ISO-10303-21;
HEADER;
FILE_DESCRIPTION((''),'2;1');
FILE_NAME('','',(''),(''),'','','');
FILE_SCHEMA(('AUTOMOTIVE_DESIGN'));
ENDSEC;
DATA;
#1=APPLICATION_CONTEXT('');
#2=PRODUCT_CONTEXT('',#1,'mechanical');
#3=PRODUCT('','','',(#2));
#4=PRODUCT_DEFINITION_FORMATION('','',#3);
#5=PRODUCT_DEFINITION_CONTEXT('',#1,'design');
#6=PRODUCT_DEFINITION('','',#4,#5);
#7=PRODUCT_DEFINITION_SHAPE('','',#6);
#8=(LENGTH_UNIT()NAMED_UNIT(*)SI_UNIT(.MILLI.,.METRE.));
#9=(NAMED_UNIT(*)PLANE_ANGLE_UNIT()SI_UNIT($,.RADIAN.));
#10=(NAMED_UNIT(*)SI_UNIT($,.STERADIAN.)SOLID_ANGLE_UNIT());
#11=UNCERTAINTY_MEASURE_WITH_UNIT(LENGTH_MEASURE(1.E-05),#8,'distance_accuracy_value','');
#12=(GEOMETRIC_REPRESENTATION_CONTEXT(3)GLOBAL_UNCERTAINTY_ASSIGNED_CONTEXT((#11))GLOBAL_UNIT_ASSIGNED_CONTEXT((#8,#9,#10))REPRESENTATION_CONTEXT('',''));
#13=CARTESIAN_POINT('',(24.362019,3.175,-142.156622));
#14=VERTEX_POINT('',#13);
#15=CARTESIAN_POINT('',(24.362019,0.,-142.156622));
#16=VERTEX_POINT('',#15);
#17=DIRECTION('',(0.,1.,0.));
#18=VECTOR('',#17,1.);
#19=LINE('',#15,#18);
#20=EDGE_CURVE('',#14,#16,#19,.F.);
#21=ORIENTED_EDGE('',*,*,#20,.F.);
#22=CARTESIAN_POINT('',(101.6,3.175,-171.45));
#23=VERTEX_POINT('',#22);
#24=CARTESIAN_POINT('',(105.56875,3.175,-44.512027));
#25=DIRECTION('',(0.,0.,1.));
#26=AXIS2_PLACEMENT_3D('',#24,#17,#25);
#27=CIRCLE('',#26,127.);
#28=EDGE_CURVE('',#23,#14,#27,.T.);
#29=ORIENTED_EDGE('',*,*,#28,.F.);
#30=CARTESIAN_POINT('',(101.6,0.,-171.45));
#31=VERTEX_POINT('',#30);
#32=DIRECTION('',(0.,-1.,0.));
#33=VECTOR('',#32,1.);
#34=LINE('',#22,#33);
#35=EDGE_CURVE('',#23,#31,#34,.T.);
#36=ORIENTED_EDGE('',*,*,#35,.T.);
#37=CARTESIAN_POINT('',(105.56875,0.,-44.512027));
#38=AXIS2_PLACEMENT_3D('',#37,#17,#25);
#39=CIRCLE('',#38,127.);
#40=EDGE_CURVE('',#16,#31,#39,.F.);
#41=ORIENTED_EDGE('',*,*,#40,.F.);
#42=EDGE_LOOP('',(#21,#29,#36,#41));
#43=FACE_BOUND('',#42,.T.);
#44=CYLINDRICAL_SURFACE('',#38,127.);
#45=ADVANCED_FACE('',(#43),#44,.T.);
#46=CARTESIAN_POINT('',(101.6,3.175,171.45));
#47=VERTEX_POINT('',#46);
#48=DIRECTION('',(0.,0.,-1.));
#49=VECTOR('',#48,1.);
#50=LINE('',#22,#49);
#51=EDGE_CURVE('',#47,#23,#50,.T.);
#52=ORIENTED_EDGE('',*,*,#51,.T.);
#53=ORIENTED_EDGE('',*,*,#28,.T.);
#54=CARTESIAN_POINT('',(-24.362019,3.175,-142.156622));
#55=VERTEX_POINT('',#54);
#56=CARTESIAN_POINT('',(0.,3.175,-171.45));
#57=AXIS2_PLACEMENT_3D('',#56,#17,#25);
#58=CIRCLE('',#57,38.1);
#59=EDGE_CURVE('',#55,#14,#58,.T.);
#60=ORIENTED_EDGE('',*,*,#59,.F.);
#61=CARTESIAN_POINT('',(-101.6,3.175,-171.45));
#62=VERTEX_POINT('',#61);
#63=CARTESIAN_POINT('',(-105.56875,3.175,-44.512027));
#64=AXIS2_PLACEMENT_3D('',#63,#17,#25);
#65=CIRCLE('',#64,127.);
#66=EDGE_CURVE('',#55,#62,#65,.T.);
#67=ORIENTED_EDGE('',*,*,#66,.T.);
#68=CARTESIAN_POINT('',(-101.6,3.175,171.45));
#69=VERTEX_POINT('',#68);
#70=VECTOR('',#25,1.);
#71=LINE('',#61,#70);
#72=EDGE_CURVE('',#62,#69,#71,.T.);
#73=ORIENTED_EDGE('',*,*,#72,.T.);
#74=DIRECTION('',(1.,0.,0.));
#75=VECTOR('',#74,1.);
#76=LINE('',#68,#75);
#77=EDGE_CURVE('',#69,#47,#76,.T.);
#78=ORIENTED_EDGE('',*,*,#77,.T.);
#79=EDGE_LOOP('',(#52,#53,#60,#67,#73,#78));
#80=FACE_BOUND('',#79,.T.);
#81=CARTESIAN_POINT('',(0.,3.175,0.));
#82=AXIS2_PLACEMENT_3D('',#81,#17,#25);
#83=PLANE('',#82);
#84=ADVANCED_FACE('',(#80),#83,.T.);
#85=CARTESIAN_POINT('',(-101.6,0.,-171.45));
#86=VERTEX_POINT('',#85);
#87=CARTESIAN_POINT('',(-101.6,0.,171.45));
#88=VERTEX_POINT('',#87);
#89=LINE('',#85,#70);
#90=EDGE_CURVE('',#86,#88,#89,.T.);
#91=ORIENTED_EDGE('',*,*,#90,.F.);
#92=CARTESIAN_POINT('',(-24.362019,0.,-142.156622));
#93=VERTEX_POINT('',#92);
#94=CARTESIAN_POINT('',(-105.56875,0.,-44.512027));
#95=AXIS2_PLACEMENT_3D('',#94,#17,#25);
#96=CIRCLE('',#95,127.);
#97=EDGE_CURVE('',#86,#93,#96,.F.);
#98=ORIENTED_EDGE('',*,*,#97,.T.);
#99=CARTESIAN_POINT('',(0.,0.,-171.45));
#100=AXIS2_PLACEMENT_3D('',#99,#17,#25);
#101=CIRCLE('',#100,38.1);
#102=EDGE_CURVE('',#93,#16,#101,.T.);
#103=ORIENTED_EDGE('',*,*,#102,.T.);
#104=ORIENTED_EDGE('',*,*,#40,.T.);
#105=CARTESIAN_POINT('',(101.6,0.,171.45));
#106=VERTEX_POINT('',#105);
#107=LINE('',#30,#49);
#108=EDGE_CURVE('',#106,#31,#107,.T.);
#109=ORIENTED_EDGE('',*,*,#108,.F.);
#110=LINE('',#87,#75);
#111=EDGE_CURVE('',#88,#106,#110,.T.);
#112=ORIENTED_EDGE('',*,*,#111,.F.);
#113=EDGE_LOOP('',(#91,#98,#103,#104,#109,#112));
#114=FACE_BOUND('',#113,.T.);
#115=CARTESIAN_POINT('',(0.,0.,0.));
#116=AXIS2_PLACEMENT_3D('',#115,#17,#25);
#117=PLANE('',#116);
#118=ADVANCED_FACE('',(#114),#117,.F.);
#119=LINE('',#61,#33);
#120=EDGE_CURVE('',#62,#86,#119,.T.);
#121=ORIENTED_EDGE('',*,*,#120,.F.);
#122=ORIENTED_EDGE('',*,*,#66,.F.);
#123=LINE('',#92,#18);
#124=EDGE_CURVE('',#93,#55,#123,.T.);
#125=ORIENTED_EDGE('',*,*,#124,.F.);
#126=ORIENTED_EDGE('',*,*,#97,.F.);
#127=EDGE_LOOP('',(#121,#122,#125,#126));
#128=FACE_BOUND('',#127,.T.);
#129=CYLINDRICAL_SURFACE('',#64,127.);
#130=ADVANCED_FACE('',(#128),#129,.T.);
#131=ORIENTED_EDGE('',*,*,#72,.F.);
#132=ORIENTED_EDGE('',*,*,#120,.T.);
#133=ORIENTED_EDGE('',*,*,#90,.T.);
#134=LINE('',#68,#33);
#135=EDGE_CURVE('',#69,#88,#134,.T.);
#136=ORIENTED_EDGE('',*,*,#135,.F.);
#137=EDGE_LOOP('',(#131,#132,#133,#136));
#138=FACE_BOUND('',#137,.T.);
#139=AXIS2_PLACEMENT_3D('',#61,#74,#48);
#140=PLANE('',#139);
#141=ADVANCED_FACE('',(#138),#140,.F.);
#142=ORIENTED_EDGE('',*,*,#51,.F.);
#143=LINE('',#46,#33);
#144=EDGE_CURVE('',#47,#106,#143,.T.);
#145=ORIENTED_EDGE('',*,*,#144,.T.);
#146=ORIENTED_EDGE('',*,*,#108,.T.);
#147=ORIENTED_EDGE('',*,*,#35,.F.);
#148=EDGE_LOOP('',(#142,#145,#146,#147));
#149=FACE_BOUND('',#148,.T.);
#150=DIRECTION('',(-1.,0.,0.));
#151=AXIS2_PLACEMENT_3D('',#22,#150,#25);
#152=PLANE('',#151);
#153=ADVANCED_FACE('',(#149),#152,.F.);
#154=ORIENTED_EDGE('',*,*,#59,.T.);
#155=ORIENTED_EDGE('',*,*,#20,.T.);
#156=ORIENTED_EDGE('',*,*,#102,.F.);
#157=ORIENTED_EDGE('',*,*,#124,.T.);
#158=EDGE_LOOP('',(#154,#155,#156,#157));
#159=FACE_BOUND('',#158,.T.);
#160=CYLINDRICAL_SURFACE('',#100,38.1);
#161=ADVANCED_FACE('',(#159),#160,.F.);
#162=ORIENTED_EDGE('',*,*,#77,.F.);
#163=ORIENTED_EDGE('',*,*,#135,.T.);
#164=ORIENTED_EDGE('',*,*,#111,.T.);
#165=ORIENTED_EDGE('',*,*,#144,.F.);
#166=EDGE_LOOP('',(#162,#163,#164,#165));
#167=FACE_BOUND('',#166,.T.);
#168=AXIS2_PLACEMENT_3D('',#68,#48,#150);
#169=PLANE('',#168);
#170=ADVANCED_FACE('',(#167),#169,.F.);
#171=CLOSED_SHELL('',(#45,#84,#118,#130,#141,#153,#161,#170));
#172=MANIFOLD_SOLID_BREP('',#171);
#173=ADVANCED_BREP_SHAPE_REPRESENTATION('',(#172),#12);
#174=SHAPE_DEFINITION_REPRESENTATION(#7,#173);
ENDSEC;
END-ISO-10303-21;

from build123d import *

# Parameters (mm, degrees)
SKETCH1_W           = 203.2
SKETCH1_H           = 342.9
BOSS_EXTRUDE1_DEPTH = 3.175
CUT_EXTRUDE1_DEPTH  = 200.31819567
FILLET1_R           = 127


with BuildPart() as part:
    # Sketch1 → Boss-Extrude1 (new body)
    with BuildSketch(Plane(origin=(0, 0, 0), x_dir=(1, 0, 0), z_dir=(0, 1, 0))):
        Rectangle(SKETCH1_W, SKETCH1_H)
    extrude(amount=BOSS_EXTRUDE1_DEPTH)

    # Sketch2 → Cut-Extrude1 (cut, through all)
    with BuildSketch(Plane(origin=(0, 3.175, 0), x_dir=(1, 0, 0), z_dir=(0, 1, 0))):
        with BuildLine():
            ThreePointArc((-38.1, 171.45), (0, 133.35), (38.1, 171.45))
            Line((38.1, 171.45), (-38.1, 171.45))
        make_face()
    extrude(amount=-CUT_EXTRUDE1_DEPTH, mode=Mode.SUBTRACT)

    # Fillet1
    # the kernel refuses this fillet: 127 mm, written as the material it takes off along each edge
    with BuildSketch(Plane(origin=(38.1, 161.925, -171.45), x_dir=(-0.42460388780422365, 0, 0.905379223564103), z_dir=(0, -1, 0))) as fillet1_piece_1:
        with BuildLine():
            CenterArc((86.279510002, -114.983161393), FILLET1_R, 115.12559338, 37.958028581)
            Line((-26.962346876, -57.491580696), (-29.227184013, -56.341749082))
            ThreePointArc((-29.227184013, -56.341749082), (-15.780836666, -27.667296473), (-2.299663228, 1.078493875))
            Line((-2.299663228, 1.078493875), (1.078493875, 2.299663228))
            ThreePointArc((1.078493875, 2.299663228), (16.177408125, -1.065051582), (31.276322376, 2.299663228))
            Line((31.276322376, 2.299663228), (32.354816251, 0))
        make_face()
    extrude(amount=320.675, mode=Mode.SUBTRACT)
    with BuildSketch(Plane(origin=(-38.1, 161.925, -171.45), x_dir=(-1, 0, 0), z_dir=(0, -1, 0))) as fillet1_piece_2:
        with BuildLine():
            CenterArc((67.46875, -126.937973134), FILLET1_R, 91.790784659, 37.958028581)
            Line((-13.737980769, -29.293378416), (-15.362115385, -27.340486521))
            ThreePointArc((-15.362115385, -27.340486521), (-5.90471481, -15.09891425), (-2.54, 0))
            Line((-2.54, 0), (0, 2.54))
            ThreePointArc((0, 2.54), (31.75, 2.54), (63.420625, 2.538759463))
            Line((63.420625, 2.538759463), (63.5, 0))
        make_face()
    extrude(amount=320.675, mode=Mode.SUBTRACT)


solid = part.part
